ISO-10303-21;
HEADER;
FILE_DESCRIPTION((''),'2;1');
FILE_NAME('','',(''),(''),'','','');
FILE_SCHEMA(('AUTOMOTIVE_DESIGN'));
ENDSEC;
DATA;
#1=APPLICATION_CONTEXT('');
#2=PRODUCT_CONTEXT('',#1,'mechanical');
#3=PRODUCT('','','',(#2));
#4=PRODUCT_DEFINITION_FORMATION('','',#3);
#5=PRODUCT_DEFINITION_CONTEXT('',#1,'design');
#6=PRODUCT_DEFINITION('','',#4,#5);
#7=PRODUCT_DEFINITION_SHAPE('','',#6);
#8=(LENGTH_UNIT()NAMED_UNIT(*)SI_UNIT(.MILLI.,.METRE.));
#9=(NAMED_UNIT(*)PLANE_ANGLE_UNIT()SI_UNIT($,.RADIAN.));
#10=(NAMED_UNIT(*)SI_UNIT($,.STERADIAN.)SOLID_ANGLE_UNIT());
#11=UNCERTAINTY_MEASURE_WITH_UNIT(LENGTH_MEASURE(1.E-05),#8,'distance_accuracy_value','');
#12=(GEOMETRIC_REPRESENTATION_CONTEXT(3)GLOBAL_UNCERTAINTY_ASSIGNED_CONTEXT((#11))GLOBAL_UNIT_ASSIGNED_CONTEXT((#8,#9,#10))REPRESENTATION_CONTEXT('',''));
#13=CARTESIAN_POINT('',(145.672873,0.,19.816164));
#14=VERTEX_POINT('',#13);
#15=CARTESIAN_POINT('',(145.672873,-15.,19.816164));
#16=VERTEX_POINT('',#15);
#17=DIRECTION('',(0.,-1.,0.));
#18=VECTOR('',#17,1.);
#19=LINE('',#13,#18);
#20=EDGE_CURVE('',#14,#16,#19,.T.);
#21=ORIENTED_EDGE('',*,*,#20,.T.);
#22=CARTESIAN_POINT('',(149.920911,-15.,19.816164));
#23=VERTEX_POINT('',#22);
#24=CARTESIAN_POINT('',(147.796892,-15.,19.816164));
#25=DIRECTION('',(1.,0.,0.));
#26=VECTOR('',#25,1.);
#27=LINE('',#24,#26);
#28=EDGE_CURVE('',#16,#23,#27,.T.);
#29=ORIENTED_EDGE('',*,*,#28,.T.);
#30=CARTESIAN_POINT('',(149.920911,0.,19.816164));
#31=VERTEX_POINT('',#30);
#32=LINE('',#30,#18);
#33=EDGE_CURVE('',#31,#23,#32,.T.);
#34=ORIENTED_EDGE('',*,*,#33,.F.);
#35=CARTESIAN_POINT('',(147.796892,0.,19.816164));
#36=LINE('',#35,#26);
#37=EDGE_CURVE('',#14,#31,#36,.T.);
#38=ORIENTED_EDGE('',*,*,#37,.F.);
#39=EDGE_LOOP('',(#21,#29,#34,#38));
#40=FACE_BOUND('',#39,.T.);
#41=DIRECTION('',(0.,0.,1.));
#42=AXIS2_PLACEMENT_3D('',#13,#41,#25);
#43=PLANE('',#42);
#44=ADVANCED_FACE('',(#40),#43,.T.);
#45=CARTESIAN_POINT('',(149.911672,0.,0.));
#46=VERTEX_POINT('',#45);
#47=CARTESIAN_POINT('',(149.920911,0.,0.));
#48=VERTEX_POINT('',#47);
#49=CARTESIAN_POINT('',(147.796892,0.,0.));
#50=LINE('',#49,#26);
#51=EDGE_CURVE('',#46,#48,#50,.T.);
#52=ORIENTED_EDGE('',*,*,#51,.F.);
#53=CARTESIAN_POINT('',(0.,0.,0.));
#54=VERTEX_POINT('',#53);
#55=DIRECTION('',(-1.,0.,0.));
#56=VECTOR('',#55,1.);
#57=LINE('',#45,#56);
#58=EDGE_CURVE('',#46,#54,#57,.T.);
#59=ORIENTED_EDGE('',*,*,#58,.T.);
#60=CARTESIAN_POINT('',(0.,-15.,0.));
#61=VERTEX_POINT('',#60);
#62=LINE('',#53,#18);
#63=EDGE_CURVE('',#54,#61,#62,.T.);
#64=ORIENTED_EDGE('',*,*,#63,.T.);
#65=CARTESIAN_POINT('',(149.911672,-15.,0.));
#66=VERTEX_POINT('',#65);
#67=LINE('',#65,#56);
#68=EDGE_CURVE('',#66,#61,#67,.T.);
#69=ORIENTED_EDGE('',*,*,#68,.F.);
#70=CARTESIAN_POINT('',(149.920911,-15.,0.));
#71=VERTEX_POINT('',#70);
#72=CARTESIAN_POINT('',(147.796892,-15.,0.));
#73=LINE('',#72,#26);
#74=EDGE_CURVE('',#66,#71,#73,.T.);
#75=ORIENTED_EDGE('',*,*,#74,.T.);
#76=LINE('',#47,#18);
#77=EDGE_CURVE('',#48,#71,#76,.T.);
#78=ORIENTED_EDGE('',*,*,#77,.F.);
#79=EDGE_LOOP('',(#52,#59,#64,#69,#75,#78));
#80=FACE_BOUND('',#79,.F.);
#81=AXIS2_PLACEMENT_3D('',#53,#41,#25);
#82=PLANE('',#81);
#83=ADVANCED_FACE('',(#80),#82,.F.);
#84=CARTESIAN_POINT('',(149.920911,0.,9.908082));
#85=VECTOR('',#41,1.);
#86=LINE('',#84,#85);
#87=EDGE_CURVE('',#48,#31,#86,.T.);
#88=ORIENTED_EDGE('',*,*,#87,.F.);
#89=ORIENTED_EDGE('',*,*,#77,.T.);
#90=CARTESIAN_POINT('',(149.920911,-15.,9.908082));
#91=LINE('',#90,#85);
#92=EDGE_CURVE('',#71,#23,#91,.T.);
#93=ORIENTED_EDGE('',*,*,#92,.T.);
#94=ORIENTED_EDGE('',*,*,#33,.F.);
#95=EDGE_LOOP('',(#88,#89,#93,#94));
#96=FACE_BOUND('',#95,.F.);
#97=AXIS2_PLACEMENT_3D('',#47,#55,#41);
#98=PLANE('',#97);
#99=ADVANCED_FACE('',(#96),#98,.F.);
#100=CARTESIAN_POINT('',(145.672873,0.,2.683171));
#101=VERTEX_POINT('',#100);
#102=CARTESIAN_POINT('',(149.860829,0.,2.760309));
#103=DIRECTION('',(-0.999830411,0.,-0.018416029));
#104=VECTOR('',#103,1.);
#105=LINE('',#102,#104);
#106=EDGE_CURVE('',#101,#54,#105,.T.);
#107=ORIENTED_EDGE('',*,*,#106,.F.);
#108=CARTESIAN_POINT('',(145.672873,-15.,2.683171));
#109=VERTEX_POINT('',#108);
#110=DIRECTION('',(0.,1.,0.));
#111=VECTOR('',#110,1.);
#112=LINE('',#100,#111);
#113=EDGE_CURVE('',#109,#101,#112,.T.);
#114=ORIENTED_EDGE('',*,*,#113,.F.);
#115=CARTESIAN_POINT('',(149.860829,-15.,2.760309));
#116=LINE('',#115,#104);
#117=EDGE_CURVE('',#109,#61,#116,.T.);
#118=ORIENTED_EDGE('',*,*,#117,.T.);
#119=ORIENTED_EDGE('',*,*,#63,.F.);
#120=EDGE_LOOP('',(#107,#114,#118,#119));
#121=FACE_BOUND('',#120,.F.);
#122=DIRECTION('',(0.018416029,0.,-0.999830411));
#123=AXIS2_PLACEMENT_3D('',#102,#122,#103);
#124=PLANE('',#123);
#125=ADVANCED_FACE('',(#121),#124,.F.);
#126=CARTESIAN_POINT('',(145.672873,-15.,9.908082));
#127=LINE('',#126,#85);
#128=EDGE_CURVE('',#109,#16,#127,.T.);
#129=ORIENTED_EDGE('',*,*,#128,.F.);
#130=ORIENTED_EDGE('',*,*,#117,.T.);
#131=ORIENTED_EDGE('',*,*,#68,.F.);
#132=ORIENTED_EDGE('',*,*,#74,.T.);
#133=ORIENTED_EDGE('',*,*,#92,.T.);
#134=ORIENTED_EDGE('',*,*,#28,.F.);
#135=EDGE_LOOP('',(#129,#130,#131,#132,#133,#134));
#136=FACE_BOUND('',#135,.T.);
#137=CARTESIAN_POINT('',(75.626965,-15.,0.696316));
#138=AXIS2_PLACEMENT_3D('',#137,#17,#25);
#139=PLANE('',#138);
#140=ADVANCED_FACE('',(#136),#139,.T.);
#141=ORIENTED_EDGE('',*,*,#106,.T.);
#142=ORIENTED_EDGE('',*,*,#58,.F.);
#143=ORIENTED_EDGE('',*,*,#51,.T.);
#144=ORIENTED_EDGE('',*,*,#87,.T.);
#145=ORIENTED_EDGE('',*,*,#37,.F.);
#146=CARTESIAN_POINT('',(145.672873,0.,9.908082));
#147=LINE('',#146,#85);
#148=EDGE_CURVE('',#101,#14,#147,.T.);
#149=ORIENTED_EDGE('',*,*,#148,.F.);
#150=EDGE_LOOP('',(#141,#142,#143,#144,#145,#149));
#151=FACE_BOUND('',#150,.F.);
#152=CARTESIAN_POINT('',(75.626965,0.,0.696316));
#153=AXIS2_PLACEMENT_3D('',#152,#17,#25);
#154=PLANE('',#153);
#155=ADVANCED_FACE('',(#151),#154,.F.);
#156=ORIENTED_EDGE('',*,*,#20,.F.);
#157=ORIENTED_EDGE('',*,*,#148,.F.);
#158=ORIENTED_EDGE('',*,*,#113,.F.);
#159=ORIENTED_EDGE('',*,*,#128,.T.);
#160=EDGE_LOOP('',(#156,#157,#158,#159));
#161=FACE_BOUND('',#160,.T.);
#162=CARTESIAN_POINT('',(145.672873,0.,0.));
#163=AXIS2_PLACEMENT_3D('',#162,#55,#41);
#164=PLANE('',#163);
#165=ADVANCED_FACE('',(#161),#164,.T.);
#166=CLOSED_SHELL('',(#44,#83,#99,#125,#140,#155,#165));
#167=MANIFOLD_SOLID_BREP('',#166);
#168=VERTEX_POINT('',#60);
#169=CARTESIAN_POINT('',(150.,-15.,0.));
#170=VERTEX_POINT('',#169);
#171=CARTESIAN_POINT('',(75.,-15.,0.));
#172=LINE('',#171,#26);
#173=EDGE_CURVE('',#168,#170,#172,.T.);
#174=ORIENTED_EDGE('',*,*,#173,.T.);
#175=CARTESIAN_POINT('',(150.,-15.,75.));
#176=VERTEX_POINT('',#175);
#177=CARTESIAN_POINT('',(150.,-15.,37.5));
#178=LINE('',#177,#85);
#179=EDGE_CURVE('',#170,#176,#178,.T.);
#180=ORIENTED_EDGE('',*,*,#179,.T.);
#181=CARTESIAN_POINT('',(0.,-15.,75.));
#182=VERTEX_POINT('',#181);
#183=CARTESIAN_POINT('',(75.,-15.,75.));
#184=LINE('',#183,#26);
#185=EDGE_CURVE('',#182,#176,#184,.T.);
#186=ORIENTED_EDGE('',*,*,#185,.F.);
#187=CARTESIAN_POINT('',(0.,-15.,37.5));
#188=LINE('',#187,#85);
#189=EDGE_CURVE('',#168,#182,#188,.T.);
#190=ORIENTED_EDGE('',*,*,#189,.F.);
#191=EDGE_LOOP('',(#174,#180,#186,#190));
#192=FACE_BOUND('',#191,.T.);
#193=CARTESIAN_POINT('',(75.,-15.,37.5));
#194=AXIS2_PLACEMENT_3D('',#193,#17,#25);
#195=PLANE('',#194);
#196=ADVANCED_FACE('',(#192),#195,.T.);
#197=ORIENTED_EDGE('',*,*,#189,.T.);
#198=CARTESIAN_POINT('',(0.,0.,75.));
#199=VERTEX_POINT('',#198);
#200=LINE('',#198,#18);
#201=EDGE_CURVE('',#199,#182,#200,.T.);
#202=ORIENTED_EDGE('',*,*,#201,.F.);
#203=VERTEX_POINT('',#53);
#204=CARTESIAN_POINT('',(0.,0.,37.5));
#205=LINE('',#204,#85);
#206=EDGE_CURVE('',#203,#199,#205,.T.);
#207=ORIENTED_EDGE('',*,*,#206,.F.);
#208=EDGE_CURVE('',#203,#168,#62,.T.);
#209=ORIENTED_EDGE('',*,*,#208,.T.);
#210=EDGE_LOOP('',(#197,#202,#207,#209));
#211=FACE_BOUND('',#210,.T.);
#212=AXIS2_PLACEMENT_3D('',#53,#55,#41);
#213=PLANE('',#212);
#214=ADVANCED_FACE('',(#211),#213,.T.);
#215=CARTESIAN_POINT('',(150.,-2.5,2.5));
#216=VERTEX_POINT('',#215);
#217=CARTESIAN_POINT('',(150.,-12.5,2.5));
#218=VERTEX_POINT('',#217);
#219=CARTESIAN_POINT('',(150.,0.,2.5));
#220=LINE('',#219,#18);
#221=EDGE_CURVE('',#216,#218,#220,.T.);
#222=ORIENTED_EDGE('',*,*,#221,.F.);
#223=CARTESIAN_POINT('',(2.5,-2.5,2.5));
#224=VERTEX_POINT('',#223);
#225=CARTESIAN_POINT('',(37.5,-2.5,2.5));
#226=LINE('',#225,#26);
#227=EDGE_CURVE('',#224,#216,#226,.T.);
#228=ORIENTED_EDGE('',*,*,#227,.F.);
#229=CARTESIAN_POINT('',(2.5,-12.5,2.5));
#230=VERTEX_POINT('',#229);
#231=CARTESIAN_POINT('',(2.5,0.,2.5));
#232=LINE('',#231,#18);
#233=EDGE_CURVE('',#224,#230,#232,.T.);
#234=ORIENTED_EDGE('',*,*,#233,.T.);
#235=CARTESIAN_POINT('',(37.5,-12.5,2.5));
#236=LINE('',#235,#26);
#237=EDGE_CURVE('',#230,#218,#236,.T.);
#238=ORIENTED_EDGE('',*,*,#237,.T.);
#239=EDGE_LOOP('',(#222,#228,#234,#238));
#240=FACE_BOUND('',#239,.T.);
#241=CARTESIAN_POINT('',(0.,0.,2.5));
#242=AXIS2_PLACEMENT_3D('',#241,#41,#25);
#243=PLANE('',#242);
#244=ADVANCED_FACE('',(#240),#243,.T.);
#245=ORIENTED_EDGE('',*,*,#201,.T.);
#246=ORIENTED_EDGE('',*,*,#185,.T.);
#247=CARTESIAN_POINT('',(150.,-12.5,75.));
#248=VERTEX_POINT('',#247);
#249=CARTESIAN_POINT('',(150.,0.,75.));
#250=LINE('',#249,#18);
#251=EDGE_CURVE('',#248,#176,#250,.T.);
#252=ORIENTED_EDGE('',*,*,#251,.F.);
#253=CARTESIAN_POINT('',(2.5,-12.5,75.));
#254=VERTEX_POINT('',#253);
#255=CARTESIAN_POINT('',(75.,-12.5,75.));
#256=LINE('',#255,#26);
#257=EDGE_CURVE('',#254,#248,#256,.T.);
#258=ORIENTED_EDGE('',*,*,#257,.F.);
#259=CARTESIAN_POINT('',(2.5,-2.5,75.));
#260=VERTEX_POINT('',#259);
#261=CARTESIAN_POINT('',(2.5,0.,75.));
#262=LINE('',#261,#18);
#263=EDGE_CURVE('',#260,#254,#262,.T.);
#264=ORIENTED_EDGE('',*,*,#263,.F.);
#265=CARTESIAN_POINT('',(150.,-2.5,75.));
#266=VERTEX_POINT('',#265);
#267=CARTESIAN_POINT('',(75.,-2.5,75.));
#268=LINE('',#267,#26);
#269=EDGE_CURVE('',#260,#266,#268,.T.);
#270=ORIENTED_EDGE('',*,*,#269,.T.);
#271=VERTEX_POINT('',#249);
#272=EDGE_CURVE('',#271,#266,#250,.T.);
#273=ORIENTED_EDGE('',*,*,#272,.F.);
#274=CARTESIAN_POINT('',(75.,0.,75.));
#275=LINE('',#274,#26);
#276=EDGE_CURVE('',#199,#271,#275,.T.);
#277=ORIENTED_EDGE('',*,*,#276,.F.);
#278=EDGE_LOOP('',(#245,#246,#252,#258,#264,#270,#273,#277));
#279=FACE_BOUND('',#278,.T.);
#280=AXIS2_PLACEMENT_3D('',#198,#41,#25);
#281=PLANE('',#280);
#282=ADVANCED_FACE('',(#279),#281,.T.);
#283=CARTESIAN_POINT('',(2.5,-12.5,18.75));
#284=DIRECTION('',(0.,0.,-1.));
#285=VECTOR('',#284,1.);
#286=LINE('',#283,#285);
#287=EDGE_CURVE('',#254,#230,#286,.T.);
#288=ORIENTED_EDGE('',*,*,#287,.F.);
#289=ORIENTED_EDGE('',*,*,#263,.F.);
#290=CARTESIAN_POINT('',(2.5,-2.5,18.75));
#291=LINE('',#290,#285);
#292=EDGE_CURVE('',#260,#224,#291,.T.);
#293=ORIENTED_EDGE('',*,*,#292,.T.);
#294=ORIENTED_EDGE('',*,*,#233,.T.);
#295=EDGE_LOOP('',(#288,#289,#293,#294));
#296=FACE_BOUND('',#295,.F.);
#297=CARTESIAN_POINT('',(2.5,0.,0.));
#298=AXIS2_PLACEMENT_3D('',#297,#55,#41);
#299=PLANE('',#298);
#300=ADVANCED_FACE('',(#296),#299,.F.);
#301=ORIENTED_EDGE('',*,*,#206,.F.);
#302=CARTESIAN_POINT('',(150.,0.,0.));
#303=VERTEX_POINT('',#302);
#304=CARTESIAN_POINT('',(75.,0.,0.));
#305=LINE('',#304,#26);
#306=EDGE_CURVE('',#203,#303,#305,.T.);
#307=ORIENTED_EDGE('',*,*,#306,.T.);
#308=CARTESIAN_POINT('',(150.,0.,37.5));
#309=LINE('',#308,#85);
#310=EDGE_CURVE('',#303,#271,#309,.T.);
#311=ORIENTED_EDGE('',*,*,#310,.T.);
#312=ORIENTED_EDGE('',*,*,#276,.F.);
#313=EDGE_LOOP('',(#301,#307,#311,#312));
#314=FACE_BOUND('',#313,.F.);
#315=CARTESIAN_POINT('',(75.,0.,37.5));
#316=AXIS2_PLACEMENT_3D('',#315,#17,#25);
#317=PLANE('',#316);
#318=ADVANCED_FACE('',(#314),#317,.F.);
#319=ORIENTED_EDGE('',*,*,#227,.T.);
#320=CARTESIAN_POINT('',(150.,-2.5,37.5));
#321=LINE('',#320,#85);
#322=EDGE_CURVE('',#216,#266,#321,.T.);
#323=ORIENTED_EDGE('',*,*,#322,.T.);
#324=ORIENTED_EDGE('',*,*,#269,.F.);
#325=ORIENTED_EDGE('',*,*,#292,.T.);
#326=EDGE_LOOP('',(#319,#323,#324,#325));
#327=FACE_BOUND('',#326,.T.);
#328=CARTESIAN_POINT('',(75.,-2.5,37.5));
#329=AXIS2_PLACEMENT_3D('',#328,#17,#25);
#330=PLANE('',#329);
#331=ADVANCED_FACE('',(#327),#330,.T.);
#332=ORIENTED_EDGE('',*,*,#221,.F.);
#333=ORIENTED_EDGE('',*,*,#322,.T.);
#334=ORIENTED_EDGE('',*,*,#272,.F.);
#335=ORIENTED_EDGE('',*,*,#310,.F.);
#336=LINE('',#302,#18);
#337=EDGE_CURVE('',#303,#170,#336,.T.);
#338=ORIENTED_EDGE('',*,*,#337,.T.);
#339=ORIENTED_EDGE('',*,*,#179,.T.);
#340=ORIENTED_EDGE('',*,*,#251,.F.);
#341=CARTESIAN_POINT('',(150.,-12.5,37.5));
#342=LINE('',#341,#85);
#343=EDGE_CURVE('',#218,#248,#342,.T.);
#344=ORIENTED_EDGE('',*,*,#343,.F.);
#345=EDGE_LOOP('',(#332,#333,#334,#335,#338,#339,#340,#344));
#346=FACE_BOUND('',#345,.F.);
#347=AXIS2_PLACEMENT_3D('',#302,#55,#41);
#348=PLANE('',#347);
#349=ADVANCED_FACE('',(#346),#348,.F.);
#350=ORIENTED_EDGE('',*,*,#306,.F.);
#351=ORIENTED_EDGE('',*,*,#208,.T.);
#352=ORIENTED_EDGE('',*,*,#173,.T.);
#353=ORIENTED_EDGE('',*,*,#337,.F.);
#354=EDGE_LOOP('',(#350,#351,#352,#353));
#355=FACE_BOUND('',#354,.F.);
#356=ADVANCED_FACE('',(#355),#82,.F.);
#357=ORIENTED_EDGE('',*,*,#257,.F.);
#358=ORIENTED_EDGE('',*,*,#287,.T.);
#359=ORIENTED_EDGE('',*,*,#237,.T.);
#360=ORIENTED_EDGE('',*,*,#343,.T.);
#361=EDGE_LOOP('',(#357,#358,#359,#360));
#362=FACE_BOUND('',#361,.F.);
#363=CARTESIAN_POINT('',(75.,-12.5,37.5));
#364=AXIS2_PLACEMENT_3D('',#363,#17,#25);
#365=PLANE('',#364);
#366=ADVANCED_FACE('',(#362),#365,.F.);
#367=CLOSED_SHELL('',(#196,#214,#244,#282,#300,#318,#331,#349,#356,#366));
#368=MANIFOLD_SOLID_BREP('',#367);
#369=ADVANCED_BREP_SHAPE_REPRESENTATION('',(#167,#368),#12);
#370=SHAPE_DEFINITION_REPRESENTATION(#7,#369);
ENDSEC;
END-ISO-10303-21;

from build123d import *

# Parameters (mm, degrees)
F0_W     = 150
F0_H     = 75
F1_DEPTH = 15
F2_T     = -2.5
F4_DEPTH = 15
F5_W     = 4.2480379343
F5_H     = 19.8161639273
F6_DEPTH = 15


with BuildPart() as f1:
    # F0 (on Front) → F1 (new body)
    with BuildSketch(Plane.XZ):
        with Locations((75, 37.5)):
            Rectangle(F0_W, F0_H)
    extrude(amount=F1_DEPTH)

    # F2
    f2_openings = [f1.faces().sort_by_distance(p)[0] for p in [
        (75, -7.5, 75),
        (150, -7.5, 37.5),
    ]]
    offset(amount=F2_T, openings=f2_openings)


with BuildPart() as f4:
    # F3 (on Front) → F4 (new body)
    with BuildSketch(Plane.XZ):
        Polygon((149.8608291149, 2.7603094932), (0, 0), (149.9116716769, 0), align=None)
    extrude(amount=F4_DEPTH)

    # F5 (on face) → F6 (join)
    with BuildSketch(Plane.XZ):
        with Locations((147.7968916297, 9.9080819637)):
            Rectangle(F5_W, F5_H)
    extrude(amount=F6_DEPTH)


solid = Compound([f1.part, f4.part])
